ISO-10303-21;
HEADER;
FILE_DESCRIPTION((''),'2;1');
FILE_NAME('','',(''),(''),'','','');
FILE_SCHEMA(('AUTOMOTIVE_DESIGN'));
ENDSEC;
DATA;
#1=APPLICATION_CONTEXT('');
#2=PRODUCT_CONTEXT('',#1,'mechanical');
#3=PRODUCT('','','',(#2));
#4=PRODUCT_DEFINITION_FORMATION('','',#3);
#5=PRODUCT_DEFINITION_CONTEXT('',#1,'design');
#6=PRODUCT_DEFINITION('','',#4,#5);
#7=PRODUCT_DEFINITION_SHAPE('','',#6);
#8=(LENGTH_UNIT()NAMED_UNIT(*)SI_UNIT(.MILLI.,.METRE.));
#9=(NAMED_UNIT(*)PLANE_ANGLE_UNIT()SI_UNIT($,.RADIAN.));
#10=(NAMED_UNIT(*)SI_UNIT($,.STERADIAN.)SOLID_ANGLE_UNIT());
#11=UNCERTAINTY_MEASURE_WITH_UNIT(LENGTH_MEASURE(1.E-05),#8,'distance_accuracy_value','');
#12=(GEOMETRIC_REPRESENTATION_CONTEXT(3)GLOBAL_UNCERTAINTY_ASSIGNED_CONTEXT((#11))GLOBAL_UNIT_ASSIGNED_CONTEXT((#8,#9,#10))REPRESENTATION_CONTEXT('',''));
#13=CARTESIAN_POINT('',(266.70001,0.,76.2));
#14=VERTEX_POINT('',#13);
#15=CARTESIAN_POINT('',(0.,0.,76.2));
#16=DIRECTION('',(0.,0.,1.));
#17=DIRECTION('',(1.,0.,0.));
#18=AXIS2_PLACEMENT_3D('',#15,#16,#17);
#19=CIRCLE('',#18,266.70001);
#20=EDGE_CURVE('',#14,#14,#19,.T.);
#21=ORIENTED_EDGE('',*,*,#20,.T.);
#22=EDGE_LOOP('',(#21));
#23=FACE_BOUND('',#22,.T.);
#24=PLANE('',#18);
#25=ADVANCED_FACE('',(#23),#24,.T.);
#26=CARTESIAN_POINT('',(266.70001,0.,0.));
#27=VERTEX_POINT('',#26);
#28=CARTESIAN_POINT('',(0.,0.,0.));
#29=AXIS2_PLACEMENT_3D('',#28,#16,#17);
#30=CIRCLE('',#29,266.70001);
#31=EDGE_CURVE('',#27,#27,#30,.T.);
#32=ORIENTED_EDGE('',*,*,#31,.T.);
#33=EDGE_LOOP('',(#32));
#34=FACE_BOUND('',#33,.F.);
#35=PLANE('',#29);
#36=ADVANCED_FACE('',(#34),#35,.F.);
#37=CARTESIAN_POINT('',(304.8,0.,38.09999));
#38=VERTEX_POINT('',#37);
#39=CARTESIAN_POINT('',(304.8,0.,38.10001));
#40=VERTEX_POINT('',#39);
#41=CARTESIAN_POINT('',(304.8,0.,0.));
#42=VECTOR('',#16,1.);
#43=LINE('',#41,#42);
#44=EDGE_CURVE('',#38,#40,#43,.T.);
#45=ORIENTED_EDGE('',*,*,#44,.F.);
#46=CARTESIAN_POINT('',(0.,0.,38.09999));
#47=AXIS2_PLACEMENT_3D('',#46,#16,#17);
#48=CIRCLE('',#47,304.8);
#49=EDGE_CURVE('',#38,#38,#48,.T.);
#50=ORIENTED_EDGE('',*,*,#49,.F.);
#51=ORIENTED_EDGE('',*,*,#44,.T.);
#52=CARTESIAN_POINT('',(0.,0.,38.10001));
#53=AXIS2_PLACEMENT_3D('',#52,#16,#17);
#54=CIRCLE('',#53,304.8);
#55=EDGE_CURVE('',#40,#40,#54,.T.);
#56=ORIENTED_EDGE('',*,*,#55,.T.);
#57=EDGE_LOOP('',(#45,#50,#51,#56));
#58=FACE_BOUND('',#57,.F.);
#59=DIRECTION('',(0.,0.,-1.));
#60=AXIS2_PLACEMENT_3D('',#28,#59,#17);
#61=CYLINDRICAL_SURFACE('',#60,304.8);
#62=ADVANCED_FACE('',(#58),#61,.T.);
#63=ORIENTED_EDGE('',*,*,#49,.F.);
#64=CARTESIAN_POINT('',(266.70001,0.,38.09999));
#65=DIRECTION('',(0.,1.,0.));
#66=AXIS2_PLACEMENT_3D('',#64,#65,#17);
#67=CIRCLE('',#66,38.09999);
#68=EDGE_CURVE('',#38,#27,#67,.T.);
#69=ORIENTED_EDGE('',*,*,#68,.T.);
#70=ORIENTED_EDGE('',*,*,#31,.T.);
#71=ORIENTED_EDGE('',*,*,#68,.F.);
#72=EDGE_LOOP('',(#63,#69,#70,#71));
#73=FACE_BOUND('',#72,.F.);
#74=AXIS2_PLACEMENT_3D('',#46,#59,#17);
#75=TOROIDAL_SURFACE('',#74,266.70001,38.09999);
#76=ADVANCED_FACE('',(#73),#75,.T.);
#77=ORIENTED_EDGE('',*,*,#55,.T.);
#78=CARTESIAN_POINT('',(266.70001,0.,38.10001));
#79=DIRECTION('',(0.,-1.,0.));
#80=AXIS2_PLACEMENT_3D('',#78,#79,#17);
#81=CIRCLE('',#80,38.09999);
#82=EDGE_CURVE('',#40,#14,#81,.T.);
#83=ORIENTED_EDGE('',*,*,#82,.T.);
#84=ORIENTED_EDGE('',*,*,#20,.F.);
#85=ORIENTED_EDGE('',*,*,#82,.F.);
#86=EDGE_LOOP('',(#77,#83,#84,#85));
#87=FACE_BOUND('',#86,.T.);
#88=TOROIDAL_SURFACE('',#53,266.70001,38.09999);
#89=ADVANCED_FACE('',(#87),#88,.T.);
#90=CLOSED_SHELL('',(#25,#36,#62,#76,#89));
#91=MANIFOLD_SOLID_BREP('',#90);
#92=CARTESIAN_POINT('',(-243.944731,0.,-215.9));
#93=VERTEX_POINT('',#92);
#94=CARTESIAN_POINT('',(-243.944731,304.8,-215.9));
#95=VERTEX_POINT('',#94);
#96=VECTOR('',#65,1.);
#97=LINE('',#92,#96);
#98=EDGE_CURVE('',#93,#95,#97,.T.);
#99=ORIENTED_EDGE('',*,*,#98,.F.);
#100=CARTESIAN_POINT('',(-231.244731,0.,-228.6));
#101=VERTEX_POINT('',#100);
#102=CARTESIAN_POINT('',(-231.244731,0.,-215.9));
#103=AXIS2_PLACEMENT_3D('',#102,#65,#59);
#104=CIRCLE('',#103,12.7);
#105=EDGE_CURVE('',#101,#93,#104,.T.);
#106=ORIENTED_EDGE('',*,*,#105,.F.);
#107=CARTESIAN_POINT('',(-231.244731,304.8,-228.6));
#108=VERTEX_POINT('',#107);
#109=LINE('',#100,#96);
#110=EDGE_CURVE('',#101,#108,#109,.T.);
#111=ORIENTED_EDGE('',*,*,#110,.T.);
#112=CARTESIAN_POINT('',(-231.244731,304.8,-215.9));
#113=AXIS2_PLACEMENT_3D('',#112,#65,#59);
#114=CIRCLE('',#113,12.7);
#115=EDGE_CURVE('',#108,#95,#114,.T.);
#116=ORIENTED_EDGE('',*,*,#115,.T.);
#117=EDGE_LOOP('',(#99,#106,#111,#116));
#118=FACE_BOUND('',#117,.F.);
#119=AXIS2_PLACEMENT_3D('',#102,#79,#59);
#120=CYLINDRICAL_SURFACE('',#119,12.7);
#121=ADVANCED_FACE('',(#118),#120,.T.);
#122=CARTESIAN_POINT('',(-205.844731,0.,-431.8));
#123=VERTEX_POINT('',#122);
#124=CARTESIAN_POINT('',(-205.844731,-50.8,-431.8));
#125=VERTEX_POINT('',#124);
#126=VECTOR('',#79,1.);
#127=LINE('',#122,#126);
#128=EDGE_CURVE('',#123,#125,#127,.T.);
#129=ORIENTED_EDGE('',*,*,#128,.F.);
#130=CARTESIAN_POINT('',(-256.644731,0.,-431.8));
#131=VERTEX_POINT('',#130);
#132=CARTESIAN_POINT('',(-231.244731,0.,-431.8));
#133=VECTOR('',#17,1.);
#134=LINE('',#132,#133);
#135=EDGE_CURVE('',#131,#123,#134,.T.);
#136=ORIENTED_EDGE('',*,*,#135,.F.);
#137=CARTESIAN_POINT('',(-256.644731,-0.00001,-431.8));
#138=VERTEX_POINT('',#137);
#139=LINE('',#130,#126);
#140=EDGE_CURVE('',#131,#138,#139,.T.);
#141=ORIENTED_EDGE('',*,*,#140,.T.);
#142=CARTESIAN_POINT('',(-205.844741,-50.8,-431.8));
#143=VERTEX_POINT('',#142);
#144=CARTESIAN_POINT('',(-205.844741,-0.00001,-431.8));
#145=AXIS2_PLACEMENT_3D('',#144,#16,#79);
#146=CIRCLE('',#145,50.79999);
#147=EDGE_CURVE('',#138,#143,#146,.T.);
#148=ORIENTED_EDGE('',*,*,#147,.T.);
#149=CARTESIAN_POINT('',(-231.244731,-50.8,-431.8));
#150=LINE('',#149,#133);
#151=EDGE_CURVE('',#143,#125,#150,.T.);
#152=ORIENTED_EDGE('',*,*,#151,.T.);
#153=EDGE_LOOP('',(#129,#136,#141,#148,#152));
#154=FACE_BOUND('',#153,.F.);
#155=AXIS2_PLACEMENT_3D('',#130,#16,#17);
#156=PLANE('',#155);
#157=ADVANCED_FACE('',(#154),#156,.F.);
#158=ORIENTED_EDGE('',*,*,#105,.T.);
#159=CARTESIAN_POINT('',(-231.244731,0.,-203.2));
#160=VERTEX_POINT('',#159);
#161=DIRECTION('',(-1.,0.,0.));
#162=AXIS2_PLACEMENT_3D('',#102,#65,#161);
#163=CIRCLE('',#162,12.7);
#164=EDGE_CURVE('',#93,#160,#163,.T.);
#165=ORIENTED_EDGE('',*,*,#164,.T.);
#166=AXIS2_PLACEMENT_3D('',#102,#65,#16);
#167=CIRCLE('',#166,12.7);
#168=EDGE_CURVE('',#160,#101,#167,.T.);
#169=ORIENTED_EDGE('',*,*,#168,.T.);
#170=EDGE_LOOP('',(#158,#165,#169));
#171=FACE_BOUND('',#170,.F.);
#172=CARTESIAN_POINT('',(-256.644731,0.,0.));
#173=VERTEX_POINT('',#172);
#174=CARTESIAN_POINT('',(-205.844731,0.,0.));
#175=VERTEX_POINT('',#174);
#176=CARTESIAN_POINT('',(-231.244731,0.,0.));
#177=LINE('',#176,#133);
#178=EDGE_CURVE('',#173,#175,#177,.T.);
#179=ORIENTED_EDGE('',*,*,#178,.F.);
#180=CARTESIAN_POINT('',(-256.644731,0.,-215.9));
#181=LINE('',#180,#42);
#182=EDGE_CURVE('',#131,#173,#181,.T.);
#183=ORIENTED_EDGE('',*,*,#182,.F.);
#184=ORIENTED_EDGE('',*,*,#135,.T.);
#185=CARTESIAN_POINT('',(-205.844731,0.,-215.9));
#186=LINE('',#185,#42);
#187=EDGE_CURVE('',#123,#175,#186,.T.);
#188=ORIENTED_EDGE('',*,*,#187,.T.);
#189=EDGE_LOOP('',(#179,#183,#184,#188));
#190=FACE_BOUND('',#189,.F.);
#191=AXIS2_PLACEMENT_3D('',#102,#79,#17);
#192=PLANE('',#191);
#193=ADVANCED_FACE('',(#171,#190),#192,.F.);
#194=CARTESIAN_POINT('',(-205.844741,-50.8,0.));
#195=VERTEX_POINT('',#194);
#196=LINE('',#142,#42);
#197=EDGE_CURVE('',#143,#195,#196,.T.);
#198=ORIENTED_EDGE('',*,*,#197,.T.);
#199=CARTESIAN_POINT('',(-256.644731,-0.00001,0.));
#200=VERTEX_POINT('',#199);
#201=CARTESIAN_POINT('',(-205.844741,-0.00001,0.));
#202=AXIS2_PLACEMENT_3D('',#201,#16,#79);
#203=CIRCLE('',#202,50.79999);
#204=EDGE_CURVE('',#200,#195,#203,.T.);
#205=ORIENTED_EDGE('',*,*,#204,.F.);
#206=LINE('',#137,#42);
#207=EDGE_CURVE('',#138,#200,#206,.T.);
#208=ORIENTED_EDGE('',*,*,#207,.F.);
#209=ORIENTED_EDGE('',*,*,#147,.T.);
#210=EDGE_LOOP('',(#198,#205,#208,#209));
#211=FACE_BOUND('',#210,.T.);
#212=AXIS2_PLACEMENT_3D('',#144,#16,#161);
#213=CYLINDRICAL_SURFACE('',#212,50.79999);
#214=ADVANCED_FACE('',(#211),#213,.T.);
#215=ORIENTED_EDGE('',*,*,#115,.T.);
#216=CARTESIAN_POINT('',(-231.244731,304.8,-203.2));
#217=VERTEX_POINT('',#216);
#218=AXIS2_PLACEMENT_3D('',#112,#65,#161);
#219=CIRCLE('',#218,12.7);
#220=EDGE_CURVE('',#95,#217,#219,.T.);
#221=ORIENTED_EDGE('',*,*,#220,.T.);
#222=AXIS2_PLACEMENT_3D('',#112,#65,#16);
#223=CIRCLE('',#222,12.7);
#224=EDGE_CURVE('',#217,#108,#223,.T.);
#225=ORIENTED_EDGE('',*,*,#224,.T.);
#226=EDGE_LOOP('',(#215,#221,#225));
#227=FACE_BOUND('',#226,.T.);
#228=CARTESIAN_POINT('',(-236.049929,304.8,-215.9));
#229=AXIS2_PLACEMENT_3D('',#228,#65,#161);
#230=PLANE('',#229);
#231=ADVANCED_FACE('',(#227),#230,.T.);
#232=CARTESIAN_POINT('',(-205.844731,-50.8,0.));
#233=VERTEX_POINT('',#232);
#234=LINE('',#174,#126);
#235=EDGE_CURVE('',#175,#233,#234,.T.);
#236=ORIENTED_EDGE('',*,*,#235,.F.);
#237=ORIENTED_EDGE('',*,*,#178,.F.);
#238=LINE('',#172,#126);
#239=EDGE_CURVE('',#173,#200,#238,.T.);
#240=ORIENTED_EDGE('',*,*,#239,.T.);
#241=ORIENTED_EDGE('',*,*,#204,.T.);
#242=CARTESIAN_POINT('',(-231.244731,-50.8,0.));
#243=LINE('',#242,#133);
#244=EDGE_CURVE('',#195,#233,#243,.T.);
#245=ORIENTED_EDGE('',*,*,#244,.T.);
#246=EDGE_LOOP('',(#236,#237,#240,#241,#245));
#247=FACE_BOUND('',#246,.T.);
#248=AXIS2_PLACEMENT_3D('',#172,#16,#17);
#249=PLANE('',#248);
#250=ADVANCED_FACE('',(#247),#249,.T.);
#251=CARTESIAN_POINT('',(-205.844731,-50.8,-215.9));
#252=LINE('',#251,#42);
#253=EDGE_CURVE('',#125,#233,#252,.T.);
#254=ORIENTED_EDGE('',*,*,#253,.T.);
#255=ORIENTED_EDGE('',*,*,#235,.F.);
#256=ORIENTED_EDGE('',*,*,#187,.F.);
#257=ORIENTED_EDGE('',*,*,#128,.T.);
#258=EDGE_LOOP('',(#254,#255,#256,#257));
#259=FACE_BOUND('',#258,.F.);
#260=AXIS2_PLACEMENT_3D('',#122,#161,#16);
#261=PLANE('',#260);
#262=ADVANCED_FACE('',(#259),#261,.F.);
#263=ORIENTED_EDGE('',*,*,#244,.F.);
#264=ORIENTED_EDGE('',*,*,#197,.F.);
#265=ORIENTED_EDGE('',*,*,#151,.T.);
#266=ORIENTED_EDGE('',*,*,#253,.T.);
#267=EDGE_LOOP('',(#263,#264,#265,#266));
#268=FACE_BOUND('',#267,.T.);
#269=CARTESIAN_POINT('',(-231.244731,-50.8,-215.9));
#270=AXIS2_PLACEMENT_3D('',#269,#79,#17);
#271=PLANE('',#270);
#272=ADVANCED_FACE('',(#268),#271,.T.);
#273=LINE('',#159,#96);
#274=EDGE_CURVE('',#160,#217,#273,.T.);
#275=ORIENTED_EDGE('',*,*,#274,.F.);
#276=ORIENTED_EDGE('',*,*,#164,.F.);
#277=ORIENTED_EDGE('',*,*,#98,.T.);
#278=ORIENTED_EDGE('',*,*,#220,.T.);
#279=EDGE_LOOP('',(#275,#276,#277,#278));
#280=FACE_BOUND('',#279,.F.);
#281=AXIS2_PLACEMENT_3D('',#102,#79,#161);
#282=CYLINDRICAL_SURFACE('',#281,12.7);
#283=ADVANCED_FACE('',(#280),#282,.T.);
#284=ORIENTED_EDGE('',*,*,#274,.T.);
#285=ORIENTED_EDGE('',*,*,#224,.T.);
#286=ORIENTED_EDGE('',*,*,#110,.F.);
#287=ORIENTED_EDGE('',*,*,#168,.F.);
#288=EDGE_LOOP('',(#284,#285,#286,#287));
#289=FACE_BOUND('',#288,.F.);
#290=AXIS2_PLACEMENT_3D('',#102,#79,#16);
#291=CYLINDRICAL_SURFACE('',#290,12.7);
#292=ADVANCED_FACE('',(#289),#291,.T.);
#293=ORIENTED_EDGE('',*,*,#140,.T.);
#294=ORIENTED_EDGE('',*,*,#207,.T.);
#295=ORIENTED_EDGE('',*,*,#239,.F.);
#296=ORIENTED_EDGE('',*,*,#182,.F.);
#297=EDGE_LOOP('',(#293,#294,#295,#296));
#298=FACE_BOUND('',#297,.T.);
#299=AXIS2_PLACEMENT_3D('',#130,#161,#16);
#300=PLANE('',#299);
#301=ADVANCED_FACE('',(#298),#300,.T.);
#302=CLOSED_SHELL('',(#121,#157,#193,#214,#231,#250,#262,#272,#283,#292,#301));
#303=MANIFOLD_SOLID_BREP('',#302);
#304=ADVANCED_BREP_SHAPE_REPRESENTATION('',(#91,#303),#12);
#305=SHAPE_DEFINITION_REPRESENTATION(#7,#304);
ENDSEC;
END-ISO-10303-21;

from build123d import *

# Parameters (mm, degrees)
F0_R     = 304.8
F1_DEPTH = 76.2
F2_R     = 38.09999
F3_W     = 50.8
F3_H     = 431.8
F4_DEPTH = 50.8
F5_R     = 50.79999
F7_DEPTH = 304.8


# Not quite as in the source:
# - a fillet or chamfer is up to 0.001 mm smaller than in the source, because OpenCascade refuses the exact size


with BuildPart() as f1:
    # F0 (on Top) → F1 (new body)
    with BuildSketch(Plane.XY):
        Circle(F0_R)
    extrude(amount=F1_DEPTH)

    # F2 (radius 38.1 in the source; OpenCascade refuses exactly that, so slightly less here)
    f2_edges = [f1.edges().sort_by_distance(p)[0] for p in [
        (-304.8, 0, 76.2),
        (-304.8, 0, 0),
    ]]
    fillet(f2_edges, radius=F2_R)


with BuildPart() as f4:
    # F3 (on Front) → F4 (new body)
    with BuildSketch(Plane.XZ):
        with Locations((-231.2447311898, -215.9)):
            Rectangle(F3_W, F3_H)
    extrude(amount=F4_DEPTH)

    # F5 (radius 50.8 in the source; OpenCascade refuses exactly that, so slightly less here)
    f5_edges = [f4.edges().sort_by_distance(p)[0] for p in [
        (-256.644731, -50.8, -215.9),
    ]]
    fillet(f5_edges, radius=F5_R)

    # F6 (on face) → F7 (join)
    with BuildSketch(Plane(origin=(0, 0, 0), x_dir=(-1, 0, 0), z_dir=(0, 1, 0))):
        with BuildLine():
            ThreePointArc((243.9447311898, -215.9), (240.2249873109, -206.9197438789), (231.2447311898, -203.2))
            Line((231.2447311898, -203.2), (231.2447311898, -228.6))
            ThreePointArc((231.2447311898, -228.6), (240.2249873109, -224.8802561211), (243.9447311898, -215.9))
        make_face()
        with BuildLine():
            Line((231.2447311898, -228.6), (231.2447311898, -203.2))
            ThreePointArc((231.2447311898, -203.2), (218.5447311898, -215.9), (231.2447311898, -228.6))
        make_face()
    extrude(amount=F7_DEPTH)


solid = Compound([f1.part, f4.part])
